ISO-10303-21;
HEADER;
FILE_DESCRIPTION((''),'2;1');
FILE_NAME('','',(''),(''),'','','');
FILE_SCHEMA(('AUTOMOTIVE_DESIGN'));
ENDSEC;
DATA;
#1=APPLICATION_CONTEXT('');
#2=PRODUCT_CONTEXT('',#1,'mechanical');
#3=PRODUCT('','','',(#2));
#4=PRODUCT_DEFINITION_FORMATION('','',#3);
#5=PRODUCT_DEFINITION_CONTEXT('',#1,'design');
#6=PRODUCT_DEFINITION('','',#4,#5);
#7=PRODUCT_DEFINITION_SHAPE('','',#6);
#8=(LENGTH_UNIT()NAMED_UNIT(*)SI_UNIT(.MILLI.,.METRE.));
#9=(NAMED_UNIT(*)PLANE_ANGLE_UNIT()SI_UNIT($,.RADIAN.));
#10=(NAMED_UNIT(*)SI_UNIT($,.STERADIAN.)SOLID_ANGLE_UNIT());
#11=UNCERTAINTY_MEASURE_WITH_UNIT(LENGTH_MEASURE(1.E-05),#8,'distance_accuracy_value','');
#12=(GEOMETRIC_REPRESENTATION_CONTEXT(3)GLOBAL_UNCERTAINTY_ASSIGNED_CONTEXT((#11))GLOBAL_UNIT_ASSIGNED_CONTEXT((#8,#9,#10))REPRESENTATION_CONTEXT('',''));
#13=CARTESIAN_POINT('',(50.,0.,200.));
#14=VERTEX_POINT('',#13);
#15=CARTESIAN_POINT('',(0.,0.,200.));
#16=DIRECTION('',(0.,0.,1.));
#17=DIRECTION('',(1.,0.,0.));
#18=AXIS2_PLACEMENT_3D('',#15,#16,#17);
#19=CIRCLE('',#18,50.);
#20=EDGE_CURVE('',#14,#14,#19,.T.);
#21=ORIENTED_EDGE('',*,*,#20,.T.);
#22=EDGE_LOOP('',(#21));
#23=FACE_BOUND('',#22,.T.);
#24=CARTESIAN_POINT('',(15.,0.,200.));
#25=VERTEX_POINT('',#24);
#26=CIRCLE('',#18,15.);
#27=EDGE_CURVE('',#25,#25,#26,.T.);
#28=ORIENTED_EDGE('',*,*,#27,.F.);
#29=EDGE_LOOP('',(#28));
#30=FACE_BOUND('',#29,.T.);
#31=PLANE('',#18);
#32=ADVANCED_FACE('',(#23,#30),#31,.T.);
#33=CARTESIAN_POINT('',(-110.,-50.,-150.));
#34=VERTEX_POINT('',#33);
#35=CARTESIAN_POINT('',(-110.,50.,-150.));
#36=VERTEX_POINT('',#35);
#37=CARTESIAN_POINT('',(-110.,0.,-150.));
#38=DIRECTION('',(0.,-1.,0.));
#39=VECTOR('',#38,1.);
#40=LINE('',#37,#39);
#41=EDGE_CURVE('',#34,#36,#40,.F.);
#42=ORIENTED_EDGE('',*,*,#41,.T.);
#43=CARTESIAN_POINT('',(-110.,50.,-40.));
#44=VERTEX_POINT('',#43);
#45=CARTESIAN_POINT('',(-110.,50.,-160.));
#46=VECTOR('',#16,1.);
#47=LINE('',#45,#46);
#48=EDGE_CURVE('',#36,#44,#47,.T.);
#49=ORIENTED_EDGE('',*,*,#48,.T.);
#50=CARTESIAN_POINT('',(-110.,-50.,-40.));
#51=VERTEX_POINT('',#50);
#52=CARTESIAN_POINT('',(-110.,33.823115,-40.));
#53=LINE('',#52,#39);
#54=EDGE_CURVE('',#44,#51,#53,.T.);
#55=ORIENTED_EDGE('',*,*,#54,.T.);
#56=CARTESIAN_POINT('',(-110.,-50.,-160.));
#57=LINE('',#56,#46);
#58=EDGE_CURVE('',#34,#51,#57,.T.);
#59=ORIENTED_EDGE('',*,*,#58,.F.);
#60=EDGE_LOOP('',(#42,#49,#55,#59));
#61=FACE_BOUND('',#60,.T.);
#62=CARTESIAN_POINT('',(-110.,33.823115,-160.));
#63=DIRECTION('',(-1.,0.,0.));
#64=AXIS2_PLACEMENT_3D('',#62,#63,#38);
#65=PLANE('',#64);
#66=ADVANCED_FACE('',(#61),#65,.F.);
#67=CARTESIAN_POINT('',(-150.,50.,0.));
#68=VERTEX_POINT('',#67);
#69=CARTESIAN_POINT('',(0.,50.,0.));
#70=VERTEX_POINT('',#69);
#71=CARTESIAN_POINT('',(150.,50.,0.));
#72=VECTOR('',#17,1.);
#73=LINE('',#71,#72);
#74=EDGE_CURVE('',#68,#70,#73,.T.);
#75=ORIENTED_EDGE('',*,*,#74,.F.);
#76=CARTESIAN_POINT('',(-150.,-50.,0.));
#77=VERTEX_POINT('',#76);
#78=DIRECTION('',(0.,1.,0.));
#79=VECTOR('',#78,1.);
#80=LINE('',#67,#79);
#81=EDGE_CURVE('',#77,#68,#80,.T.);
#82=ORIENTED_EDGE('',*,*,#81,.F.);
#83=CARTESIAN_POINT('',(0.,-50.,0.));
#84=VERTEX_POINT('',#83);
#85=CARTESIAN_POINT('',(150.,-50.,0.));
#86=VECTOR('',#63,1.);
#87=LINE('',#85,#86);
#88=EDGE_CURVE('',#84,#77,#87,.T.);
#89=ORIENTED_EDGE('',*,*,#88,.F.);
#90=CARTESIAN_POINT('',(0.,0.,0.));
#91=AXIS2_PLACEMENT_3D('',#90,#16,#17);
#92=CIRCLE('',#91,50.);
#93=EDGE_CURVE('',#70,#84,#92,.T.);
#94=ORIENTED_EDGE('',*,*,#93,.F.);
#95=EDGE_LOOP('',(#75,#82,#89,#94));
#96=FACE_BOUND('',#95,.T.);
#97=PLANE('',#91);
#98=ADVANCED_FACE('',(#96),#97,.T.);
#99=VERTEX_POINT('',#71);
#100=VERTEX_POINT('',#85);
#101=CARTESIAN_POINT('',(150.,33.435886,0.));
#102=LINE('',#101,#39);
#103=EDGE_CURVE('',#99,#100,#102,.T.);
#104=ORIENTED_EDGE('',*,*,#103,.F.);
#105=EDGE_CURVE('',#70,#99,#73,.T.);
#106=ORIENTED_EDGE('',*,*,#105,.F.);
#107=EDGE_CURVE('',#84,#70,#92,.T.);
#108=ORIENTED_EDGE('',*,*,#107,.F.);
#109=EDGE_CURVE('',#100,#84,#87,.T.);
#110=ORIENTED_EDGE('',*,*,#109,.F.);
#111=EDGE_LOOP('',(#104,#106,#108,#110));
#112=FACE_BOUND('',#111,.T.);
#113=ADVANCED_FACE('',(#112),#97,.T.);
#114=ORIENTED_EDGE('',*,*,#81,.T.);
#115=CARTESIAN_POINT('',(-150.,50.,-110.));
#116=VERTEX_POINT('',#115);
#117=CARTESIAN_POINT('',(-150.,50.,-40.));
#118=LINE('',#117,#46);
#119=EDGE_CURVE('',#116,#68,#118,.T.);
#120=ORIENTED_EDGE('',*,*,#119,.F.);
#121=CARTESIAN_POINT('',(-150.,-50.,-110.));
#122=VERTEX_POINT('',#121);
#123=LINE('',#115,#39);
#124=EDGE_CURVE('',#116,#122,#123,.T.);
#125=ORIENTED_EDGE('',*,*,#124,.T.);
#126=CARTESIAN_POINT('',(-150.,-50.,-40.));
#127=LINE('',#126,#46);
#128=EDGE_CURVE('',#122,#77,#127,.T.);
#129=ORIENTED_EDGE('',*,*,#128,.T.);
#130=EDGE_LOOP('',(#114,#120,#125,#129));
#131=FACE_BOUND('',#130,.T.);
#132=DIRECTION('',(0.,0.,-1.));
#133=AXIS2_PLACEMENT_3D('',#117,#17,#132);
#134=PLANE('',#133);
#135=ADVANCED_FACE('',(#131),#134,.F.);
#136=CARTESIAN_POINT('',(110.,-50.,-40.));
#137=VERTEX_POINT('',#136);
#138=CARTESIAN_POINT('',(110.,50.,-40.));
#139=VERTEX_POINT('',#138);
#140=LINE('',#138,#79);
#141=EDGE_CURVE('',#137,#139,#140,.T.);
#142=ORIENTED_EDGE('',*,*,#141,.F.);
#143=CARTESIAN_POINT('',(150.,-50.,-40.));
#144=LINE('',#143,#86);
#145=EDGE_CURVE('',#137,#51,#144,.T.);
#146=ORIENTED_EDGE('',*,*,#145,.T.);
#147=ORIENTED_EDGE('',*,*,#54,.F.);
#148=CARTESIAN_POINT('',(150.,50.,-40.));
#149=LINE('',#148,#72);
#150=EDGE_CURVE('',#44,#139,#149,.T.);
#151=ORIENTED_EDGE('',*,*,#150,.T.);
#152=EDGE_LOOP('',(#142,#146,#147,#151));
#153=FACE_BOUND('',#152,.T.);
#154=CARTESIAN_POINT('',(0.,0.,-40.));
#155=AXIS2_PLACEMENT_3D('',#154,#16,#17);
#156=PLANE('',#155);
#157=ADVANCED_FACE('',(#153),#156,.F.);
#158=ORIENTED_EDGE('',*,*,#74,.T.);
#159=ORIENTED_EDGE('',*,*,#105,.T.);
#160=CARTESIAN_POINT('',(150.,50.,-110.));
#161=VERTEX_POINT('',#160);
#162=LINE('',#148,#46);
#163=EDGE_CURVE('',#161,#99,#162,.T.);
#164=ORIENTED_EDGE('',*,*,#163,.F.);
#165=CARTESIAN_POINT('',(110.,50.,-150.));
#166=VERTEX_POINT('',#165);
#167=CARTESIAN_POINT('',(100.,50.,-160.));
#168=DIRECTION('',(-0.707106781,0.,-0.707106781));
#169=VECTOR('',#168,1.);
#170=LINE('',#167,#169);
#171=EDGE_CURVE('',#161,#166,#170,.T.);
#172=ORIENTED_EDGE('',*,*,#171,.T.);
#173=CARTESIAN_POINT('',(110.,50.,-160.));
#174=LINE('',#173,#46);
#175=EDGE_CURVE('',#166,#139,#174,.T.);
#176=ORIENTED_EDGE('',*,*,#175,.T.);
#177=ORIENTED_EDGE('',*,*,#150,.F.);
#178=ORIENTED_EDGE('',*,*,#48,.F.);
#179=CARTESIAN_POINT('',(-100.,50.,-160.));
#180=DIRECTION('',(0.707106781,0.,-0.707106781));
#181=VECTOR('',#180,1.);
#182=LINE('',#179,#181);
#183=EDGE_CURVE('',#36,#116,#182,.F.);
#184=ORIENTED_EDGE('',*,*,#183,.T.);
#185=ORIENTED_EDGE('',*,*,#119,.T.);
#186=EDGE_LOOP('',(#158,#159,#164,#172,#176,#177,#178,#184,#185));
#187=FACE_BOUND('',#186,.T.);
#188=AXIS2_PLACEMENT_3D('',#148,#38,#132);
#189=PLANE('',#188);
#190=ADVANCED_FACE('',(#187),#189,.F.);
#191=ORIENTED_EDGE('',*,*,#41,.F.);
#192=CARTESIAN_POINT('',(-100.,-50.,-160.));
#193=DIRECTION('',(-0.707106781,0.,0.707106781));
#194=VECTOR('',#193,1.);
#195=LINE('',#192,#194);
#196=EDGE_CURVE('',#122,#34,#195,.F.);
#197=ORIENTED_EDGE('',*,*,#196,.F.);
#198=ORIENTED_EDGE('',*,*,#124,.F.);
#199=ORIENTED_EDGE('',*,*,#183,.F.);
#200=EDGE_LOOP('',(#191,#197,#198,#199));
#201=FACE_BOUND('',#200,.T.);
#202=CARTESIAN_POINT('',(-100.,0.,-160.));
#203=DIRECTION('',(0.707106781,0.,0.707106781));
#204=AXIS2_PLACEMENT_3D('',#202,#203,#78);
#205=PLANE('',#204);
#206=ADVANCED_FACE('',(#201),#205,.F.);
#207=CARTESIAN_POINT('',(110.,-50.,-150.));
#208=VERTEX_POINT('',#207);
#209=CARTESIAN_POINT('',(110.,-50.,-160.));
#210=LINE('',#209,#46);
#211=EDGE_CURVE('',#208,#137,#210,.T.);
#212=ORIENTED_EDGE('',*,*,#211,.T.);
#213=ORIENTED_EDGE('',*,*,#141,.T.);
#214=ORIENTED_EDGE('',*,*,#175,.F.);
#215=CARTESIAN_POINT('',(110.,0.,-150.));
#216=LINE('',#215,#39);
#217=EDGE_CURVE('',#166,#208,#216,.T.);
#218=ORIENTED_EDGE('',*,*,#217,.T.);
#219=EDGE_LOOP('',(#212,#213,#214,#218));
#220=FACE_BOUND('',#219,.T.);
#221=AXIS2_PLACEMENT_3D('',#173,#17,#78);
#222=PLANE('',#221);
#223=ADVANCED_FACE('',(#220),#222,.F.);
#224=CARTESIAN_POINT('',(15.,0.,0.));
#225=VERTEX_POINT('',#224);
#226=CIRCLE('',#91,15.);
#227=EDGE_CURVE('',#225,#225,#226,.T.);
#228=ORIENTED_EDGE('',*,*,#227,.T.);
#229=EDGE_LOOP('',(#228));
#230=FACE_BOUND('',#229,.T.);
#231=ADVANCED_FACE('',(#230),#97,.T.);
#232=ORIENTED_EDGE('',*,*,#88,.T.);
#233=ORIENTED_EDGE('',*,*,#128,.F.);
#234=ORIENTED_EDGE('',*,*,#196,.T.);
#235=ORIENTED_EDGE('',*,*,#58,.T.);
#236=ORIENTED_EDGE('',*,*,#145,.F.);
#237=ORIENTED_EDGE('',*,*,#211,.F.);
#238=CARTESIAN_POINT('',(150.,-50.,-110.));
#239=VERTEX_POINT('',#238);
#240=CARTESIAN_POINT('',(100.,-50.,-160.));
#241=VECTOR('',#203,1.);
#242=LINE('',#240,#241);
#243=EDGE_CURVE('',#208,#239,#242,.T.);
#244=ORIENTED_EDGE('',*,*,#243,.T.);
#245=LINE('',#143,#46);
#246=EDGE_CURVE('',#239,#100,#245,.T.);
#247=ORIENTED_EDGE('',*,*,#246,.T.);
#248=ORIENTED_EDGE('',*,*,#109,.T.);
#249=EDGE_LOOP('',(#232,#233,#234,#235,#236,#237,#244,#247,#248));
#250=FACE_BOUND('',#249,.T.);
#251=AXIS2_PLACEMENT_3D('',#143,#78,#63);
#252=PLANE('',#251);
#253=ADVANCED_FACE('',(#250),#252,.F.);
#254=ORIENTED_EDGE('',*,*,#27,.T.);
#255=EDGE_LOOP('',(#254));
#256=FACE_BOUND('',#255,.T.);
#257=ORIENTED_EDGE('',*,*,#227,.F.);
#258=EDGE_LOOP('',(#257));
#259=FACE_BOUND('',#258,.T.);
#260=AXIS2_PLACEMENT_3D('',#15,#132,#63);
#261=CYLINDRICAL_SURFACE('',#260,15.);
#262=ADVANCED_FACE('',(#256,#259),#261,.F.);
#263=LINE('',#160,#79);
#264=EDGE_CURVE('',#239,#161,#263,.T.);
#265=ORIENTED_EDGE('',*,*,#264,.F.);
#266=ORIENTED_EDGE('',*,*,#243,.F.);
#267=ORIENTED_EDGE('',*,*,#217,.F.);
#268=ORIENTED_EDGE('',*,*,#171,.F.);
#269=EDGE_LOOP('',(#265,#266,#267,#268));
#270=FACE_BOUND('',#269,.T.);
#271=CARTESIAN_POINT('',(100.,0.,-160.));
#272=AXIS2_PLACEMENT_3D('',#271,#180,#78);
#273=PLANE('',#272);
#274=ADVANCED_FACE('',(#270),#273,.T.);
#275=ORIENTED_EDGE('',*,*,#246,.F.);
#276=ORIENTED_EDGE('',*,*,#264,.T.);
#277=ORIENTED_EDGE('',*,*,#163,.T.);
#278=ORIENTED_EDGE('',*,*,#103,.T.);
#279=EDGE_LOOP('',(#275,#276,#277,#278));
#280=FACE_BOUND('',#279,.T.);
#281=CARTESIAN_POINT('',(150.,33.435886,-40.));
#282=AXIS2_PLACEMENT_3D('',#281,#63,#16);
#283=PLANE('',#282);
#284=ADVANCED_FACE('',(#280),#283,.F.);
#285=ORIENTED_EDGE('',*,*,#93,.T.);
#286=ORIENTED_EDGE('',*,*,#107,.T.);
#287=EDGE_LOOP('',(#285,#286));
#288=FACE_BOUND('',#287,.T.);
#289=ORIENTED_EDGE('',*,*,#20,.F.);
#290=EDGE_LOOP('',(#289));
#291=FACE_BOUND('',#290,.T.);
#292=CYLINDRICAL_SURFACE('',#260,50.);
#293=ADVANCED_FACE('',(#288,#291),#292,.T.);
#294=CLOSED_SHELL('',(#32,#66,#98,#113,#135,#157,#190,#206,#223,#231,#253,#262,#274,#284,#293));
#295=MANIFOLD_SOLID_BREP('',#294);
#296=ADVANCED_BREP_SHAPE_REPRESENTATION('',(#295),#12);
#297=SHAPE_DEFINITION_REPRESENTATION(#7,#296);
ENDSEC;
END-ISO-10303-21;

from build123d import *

# Parameters (mm, degrees)
SKETCH2_R           = 50
SKETCH2_R_2         = 15
BOSS_EXTRUDE1_DEPTH = 200
BOSS_EXTRUDE2_DEPTH = 40
SKETCH4_W           = 40
SKETCH4_H           = 100
BOSS_EXTRUDE3_DEPTH = 120
CHAMFER1_SIZE       = 50
CHAMFER2_SIZE       = 50


with BuildPart() as part:
    # Sketch2 → Boss-Extrude1 (new body)
    with BuildSketch(Plane.XY):
        Circle(SKETCH2_R)
        Circle(SKETCH2_R_2, mode=Mode.SUBTRACT)
    extrude(amount=BOSS_EXTRUDE1_DEPTH)

    # Sketch3 → Boss-Extrude2 (add)
    with BuildSketch(Plane(origin=(0, 0, 0), x_dir=(-1, 0, 0), z_dir=(0, 0, -1))):
        Polygon((-150, 50), (-150, 33.43588559), (-150, -50), (150, -50), (150, 50), align=None)
    extrude(amount=BOSS_EXTRUDE2_DEPTH)

    # Sketch4 → Boss-Extrude3 (add)
    with BuildSketch(Plane(origin=(0, 0, -40), x_dir=(-1, 0, 0), z_dir=(0, 0, -1))):
        Polygon((110, 50), (110, 33.823115264), (110, -50), (150, -50), (150, 50), align=None)
        with Locations((-130, 0)):
            Rectangle(SKETCH4_W, SKETCH4_H)
    extrude(amount=BOSS_EXTRUDE3_DEPTH)

    # Chamfer1
    # the kernel refuses this chamfer: 50 mm, written as the material it takes off along each edge
    with BuildSketch(Plane(origin=(-150, -178.584149398, -160), x_dir=(0.9996219169112966, 0, -0.027495876610586594), z_dir=(0, 1, 0))) as chamfer1_piece_1:
        Polygon((CHAMFER1_SIZE * 0.999621916911, -CHAMFER1_SIZE * 0.0274958766106), (-CHAMFER1_SIZE * 0.0274958766106, -CHAMFER1_SIZE * 0.999621916911), (0, 0), align=None)
    extrude(amount=357.168298797, mode=Mode.SUBTRACT)

    # Chamfer2
    # the kernel refuses this chamfer: 50 mm, written as the material it takes off along each edge
    with BuildSketch(Plane(origin=(150, -178.584149398, -160), x_dir=(0.027495876610586594, 0, 0.9996219169112966), z_dir=(0, 1, 0))) as chamfer2_piece_1:
        Polygon((CHAMFER2_SIZE * 0.999621916911, -CHAMFER2_SIZE * 0.0274958766106), (-CHAMFER2_SIZE * 0.0274958766106, -CHAMFER2_SIZE * 0.999621916911), (0, 0), align=None)
    extrude(amount=357.168298797, mode=Mode.SUBTRACT)


solid = part.part
